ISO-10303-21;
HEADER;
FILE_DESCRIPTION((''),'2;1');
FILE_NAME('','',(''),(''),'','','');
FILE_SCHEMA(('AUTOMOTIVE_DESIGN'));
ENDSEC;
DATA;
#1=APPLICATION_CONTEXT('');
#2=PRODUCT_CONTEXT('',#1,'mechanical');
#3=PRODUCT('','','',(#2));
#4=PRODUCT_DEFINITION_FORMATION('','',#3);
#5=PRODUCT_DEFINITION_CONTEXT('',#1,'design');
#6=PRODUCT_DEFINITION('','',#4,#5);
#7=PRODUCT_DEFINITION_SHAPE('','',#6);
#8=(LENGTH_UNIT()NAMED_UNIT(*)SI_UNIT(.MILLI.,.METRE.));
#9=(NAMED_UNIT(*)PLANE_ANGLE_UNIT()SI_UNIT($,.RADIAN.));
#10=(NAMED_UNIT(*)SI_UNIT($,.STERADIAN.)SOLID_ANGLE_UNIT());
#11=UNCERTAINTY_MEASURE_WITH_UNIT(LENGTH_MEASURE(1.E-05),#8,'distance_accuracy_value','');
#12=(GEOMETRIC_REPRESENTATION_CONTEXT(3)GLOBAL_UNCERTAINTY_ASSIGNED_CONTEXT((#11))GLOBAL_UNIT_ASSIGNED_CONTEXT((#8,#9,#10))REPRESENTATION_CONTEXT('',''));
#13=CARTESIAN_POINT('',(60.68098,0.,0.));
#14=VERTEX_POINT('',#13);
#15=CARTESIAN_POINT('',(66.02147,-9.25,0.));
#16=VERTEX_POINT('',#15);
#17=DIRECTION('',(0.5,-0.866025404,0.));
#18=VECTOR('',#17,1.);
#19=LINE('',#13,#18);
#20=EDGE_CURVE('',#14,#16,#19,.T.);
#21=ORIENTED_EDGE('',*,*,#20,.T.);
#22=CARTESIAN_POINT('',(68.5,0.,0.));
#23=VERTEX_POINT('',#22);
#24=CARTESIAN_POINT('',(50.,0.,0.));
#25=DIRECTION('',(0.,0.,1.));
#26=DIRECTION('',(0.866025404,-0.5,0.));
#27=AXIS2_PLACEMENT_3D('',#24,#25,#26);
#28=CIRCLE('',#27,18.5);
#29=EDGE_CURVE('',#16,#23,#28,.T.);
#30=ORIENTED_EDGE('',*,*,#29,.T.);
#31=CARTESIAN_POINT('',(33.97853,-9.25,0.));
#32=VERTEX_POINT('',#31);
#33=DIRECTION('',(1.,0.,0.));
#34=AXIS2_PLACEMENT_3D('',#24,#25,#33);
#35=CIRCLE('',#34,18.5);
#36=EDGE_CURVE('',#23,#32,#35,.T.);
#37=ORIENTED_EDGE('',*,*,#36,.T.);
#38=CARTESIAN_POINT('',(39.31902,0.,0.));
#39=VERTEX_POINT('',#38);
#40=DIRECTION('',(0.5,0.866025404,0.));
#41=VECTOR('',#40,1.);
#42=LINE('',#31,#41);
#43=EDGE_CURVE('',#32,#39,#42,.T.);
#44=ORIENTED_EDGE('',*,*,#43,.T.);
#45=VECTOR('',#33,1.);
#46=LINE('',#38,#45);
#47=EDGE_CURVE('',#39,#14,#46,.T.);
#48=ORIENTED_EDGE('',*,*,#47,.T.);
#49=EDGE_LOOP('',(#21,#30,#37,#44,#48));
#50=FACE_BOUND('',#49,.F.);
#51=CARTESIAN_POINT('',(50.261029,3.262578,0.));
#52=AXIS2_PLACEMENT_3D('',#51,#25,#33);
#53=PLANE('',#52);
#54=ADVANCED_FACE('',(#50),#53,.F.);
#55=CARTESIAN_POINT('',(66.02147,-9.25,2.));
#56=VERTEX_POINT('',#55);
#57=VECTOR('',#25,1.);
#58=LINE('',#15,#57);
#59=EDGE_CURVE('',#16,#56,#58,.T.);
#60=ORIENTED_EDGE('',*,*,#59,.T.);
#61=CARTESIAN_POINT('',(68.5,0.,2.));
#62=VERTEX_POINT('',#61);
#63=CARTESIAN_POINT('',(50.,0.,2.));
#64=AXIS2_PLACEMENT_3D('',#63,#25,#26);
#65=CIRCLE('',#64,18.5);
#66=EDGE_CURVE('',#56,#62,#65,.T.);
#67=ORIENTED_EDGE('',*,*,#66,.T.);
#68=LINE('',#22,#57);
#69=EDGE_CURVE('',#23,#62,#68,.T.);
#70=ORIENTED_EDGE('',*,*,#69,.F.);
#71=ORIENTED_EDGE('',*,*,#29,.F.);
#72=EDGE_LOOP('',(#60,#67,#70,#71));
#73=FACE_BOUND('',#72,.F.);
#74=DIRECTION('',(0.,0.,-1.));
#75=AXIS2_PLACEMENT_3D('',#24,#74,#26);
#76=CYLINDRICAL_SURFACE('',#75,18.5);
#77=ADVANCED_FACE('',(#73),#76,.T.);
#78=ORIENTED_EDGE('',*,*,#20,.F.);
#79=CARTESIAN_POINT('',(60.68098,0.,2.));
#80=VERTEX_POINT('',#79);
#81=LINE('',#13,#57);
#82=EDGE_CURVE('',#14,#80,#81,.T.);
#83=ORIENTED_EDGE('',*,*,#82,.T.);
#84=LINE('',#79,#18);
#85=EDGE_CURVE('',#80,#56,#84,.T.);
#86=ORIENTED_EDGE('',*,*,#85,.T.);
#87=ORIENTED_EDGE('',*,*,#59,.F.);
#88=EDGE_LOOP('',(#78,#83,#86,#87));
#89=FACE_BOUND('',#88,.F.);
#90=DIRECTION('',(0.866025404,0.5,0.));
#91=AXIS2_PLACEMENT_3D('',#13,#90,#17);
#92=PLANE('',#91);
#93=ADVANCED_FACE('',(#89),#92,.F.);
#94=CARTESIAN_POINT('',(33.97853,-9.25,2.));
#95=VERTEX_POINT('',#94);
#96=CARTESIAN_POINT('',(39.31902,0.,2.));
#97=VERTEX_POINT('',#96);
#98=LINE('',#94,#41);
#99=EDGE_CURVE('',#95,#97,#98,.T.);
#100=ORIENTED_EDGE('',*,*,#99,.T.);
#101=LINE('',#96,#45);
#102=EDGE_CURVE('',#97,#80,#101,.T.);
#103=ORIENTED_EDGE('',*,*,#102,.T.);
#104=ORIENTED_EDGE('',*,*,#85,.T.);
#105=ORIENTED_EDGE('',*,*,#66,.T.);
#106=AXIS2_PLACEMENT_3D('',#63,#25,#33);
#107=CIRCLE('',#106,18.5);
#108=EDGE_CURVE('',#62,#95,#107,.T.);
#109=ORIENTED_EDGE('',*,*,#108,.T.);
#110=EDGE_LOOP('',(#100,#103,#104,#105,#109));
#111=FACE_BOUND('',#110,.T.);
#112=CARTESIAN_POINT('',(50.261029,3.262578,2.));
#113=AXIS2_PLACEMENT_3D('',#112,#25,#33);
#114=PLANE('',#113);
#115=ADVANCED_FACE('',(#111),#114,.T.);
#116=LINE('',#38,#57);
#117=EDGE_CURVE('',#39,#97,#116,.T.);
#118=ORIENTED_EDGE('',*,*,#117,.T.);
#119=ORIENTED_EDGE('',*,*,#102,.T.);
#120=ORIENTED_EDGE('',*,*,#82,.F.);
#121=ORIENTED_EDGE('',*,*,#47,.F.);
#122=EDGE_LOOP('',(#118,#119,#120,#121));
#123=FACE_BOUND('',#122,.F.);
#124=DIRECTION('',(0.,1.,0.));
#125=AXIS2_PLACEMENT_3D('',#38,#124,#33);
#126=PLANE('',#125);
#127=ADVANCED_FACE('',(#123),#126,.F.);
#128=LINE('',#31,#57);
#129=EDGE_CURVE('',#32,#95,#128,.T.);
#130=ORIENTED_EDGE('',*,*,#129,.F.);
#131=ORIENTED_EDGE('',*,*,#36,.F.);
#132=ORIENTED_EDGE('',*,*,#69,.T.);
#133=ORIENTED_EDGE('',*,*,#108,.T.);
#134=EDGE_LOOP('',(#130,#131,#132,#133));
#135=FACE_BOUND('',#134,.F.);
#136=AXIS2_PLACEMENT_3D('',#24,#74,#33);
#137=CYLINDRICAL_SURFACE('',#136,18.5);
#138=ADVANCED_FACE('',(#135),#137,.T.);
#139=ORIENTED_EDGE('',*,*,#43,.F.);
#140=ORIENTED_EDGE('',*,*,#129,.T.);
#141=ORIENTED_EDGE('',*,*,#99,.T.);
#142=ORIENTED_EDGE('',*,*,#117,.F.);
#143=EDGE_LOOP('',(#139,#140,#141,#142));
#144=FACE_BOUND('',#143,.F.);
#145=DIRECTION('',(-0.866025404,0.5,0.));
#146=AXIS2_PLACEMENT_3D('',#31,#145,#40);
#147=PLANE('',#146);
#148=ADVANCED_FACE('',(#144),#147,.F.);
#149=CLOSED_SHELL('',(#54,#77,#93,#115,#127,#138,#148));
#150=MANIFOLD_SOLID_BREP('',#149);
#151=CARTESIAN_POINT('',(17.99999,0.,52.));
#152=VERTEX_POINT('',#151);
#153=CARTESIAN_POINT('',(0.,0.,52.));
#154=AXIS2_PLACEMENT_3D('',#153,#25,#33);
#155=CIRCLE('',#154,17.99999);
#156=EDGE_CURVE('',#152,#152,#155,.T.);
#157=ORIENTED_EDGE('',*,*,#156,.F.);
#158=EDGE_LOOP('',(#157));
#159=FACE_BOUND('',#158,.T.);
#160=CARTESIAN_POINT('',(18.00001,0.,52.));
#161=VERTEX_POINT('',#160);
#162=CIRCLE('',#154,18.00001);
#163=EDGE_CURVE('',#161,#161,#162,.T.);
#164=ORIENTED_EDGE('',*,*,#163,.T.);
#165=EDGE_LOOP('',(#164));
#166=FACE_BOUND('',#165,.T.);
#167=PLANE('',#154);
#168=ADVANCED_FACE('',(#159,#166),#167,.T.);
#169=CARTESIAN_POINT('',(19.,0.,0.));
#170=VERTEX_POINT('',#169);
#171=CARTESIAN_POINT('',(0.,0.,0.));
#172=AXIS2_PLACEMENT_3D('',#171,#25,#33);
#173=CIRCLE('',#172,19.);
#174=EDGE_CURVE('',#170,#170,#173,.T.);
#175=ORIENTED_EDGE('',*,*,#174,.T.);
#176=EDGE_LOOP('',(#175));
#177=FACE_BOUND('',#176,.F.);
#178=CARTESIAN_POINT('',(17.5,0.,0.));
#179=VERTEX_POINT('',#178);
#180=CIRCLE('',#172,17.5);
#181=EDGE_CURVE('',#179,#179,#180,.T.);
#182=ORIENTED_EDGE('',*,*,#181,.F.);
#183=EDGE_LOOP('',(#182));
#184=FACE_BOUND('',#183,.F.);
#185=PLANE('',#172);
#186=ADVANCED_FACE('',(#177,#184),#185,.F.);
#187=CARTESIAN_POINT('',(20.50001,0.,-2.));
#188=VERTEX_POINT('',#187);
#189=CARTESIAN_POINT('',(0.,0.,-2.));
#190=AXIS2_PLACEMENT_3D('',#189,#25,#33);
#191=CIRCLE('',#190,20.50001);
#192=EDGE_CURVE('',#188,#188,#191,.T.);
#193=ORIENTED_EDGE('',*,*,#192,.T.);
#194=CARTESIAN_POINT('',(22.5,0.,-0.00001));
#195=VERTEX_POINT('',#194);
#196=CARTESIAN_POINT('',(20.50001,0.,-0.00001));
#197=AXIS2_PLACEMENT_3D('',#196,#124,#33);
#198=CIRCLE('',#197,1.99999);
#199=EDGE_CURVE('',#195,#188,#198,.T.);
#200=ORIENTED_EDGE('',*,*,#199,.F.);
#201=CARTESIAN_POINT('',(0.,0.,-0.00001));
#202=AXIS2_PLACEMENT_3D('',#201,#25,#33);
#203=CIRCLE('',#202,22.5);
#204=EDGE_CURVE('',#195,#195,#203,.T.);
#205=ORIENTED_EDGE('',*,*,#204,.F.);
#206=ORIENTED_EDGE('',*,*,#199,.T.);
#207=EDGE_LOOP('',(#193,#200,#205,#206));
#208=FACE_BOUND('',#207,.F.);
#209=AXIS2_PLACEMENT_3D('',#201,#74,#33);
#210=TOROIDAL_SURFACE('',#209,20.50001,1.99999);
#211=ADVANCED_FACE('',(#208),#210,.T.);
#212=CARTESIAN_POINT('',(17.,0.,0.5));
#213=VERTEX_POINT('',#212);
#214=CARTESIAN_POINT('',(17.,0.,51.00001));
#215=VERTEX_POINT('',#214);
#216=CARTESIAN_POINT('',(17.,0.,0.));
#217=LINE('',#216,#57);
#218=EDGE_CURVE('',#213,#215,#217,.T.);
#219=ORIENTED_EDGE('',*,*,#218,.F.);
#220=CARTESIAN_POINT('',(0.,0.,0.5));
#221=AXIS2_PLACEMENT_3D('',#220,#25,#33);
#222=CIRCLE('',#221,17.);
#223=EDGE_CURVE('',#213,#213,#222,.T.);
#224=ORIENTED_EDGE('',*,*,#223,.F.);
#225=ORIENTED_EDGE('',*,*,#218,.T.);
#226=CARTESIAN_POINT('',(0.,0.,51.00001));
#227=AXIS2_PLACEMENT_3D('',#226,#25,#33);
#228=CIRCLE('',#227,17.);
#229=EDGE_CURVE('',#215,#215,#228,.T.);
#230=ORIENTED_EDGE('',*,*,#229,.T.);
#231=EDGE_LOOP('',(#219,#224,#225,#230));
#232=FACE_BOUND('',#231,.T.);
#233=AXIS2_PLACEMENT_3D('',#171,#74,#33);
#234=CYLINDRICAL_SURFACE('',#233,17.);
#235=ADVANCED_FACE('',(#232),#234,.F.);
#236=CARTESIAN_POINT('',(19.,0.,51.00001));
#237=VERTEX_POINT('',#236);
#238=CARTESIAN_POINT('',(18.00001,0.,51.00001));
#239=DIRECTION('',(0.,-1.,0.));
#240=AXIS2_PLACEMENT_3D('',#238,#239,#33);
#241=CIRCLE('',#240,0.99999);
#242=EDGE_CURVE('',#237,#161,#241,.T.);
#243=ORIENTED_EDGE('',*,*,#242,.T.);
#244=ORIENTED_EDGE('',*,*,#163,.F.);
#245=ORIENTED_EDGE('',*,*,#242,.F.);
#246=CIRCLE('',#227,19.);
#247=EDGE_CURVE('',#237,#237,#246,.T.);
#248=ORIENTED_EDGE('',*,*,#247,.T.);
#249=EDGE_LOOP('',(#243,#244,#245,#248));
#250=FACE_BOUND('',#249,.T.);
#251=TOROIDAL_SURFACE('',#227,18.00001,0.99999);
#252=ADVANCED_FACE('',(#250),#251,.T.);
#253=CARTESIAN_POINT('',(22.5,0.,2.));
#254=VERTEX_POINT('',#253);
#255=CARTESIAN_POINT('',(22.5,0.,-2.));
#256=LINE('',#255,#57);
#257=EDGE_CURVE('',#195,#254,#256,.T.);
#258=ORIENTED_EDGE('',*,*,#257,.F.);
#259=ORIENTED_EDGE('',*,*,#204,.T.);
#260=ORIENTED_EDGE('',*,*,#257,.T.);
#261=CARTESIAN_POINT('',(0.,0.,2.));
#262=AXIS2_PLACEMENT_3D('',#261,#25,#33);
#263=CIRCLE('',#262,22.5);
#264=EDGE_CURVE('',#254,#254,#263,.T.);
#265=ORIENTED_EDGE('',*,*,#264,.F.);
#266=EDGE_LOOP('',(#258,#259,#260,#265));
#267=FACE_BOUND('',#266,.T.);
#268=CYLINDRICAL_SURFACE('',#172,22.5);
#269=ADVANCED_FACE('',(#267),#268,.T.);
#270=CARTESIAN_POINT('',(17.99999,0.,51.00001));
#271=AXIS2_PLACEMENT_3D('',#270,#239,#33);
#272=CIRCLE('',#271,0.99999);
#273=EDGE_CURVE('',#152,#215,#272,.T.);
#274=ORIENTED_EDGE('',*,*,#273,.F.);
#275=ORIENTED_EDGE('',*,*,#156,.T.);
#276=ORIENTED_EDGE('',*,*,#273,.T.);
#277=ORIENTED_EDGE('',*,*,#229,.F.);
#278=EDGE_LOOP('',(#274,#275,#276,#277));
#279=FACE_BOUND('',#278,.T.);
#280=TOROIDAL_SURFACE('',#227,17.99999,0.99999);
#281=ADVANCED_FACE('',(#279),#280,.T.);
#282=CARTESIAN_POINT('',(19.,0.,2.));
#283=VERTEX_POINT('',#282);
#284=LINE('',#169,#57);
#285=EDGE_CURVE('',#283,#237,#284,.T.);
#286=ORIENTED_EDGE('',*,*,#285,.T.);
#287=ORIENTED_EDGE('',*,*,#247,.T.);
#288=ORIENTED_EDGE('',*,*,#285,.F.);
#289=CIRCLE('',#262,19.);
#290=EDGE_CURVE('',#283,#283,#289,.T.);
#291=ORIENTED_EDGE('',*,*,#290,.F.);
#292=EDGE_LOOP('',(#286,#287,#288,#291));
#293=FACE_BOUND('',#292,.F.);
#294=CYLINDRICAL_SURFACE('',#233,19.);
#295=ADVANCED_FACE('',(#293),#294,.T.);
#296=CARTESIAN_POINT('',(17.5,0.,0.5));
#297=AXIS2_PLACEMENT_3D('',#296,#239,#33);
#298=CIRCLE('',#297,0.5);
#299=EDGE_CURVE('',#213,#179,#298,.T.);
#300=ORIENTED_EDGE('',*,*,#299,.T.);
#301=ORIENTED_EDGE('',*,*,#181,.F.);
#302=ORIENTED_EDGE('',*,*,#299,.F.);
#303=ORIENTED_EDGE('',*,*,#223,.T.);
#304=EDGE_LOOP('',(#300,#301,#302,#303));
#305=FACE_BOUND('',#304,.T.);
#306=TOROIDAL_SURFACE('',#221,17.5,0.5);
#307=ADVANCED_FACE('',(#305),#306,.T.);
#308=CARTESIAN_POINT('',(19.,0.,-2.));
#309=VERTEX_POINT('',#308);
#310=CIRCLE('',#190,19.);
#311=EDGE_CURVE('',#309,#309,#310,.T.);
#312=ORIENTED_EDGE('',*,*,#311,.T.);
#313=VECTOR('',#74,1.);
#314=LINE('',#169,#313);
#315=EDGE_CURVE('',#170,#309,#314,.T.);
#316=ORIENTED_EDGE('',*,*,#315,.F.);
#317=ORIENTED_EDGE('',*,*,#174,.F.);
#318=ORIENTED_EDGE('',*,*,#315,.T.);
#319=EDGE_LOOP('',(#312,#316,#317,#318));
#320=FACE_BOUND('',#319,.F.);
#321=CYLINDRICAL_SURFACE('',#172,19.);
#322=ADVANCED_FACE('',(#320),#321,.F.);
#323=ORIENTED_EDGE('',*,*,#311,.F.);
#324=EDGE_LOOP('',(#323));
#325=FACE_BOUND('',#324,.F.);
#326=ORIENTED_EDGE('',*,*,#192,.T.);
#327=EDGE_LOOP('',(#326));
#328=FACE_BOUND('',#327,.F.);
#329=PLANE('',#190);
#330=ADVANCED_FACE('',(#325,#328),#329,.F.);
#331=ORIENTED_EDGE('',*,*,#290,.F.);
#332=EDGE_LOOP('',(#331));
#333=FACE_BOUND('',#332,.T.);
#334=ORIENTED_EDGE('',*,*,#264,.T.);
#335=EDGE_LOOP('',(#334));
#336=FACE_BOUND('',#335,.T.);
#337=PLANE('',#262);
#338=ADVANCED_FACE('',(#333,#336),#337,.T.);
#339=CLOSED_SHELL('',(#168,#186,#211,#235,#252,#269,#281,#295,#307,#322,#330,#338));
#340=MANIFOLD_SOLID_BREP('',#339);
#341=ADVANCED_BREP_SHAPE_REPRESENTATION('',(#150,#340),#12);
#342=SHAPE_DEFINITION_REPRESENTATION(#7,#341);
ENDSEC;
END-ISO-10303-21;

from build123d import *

# Parameters (mm, degrees)
F0_R          = 19
F0_R_2        = 17
F1_DEPTH      = 52
F0_R_3        = 22.5
F2_DEPTH      = 2
F2_DEPTH_BACK = 2
F3_R          = 1.99999
F4_R          = 0.99999
F5_DEPTH      = 2
F6_R          = 0.5


# Not quite as in the source:
# - a fillet or chamfer is up to 0.001 mm smaller than in the source, because OpenCascade refuses the exact size


with BuildPart() as f1:
    # F0 (on Top) → F1 (new body)
    with BuildSketch(Plane.XY):
        Circle(F0_R)
        Circle(F0_R_2, mode=Mode.SUBTRACT)
    extrude(amount=F1_DEPTH)

    # F0 (on Top) → F2 (join, two sides)
    with BuildSketch(Plane.XY) as f2_sk:
        Circle(F0_R_3)
        Circle(F0_R, mode=Mode.SUBTRACT)
    extrude(amount=F2_DEPTH)
    extrude(f2_sk.sketch, amount=-F2_DEPTH_BACK)

    # F3 (radius 2 in the source; OpenCascade refuses exactly that, so slightly less here)
    f3_edges = [f1.edges().sort_by_distance(p)[0] for p in [
        (-22.5, 0, -2),
    ]]
    fillet(f3_edges, radius=F3_R)

    # F4 (radius 1 in the source; OpenCascade refuses exactly that, so slightly less here)
    f4_edges = [f1.edges().sort_by_distance(p)[0] for p in [
        (-19, 0, 52),
        (-17, 0, 52),
    ]]
    fillet(f4_edges, radius=F4_R)

    # F6
    f6_edges = [f1.edges().sort_by_distance(p)[0] for p in [
        (-17, 0, 0),
    ]]
    fillet(f6_edges, radius=F6_R)


with BuildPart() as f5:
    # F0 (on Top) → F5 (new body)
    with BuildSketch(Plane.XY):
        with BuildLine():
            ThreePointArc((66.02146997, -9.25), (67.8696277863, -4.7881523344), (68.5, 0))
            ThreePointArc((68.5, 0), (45.2118476656, 17.8696277863), (33.97853003, -9.25))
            Line((33.97853003, -9.25), (39.31902002, 0))
            Line((39.31902002, 0), (60.68097998, 0))
            Line((60.68097998, 0), (66.02146997, -9.25))
        make_face()
    extrude(amount=F5_DEPTH)


solid = Compound([f1.part, f5.part])
